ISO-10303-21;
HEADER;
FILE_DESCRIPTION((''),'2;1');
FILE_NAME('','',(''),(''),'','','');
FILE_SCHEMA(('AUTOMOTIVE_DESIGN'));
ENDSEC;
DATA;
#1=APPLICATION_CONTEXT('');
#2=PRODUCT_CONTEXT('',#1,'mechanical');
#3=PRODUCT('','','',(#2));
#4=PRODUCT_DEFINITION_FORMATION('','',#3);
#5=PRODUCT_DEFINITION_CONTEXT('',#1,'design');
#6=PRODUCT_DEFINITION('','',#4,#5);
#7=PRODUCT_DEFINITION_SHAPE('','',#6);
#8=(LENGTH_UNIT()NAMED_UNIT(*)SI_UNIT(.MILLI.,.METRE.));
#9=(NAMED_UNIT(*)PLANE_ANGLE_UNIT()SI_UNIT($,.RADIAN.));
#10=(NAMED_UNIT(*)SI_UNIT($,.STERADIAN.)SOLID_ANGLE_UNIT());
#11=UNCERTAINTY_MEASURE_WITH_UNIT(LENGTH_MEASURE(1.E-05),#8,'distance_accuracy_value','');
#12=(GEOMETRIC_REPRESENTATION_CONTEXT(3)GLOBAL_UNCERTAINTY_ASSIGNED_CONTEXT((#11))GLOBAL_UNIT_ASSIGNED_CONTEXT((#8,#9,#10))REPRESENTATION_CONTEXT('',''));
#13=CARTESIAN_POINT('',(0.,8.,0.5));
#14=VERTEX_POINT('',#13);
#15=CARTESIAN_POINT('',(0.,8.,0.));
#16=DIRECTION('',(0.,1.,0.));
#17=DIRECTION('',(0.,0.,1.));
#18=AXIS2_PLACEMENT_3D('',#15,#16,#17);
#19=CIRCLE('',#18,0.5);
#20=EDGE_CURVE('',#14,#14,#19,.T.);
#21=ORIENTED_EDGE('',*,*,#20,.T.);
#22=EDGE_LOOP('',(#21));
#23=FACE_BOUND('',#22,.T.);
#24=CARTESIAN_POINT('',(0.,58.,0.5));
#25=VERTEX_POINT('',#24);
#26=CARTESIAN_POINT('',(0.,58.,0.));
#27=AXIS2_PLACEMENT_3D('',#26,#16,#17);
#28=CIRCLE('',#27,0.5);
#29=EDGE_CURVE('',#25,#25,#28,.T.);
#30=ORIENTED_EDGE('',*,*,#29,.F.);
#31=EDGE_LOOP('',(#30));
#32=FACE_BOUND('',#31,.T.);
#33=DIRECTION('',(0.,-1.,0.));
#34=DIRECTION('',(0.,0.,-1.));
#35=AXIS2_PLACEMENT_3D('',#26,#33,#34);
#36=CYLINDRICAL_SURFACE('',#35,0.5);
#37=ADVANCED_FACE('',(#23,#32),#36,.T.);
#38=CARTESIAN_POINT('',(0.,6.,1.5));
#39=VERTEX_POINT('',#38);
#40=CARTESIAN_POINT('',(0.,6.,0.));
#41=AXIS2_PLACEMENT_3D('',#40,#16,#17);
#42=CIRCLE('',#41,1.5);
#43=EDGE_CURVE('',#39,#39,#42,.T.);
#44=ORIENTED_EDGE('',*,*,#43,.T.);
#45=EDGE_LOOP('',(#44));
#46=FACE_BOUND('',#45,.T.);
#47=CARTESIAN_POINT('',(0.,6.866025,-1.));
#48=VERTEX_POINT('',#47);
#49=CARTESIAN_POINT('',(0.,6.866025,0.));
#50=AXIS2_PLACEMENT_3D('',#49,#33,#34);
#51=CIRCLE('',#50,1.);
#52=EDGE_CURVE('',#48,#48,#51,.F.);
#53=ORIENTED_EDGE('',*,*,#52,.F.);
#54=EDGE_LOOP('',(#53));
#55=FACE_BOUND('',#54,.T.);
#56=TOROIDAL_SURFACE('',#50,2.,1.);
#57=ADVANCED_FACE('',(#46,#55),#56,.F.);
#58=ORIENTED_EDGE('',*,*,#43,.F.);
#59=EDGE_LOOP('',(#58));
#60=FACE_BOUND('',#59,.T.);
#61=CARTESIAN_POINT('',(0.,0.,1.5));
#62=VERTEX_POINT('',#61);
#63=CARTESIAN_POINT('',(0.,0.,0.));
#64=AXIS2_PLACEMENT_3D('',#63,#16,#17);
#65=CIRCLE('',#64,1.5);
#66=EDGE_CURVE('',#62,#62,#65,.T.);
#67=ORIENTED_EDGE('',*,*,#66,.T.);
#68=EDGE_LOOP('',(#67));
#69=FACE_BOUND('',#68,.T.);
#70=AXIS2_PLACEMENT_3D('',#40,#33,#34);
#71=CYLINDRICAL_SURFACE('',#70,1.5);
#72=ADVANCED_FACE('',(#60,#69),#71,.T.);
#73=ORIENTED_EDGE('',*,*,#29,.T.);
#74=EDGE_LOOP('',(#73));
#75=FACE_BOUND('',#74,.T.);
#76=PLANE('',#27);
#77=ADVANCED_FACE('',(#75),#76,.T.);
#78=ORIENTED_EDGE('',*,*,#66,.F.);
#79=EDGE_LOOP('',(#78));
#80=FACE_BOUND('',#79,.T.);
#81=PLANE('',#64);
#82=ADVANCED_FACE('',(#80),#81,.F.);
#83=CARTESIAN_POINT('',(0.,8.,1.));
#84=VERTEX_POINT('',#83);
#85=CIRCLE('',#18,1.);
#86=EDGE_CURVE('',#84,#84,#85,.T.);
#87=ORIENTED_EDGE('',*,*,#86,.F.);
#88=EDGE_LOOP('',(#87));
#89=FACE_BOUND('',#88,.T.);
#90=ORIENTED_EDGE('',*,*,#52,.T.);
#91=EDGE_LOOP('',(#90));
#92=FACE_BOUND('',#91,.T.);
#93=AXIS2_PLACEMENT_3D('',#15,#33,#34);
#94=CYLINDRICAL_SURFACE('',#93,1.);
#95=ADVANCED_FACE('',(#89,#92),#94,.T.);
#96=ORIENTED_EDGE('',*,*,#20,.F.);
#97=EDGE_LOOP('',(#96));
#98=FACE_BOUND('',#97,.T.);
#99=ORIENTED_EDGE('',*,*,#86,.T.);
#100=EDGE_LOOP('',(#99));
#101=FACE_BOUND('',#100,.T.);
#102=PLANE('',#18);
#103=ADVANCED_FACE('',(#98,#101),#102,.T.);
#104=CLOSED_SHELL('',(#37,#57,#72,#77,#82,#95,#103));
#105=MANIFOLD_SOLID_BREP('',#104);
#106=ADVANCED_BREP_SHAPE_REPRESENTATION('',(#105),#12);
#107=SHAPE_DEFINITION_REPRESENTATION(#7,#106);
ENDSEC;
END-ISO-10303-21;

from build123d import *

# Parameters (mm, degrees)
SKETCH1_R           = 1.5
BOSS_EXTRUDE1_DEPTH = 6
SKETCH2_R           = 1
BOSS_EXTRUDE2_DEPTH = 2
FILLET1_R           = 1
SKETCH3_R           = 0.5
BOSS_EXTRUDE3_DEPTH = 50


with BuildPart() as part:
    # Sketch1 → Boss-Extrude1 (new body)
    with BuildSketch(Plane(origin=(0, 0, 0), x_dir=(1, 0, 0), z_dir=(0, 1, 0))):
        with Locations(Location((0, 0, 0), (0, 0, 270))):
            Circle(SKETCH1_R)
    extrude(amount=BOSS_EXTRUDE1_DEPTH)

    # Sketch2 → Boss-Extrude2 (add)
    with BuildSketch(Plane(origin=(0, 6, 0), x_dir=(1, 0, 0), z_dir=(0, 1, 0))):
        with Locations(Location((0, 0, 0), (0, 0, 270))):
            Circle(SKETCH2_R)
    extrude(amount=BOSS_EXTRUDE2_DEPTH)

    # Fillet1
    # the kernel refuses this fillet: 1 mm, written as the material it adds along each edge
    with BuildSketch(Plane(origin=(0, 6, 0), x_dir=(0, 0, 1), z_dir=(-1, 0, 0))) as fillet1_piece_1:
        with BuildLine():
            CenterArc((2, 0.866025404), FILLET1_R, 180, 60)
            Line((1, 0.866025404), (0.98, 0.866025404))
            Line((0.98, 0.866025404), (0.98, 0))
            Line((0.98, 0), (1, -0.02))
            ThreePointArc((1, -0.02), (1.25, -0.02), (1.49, -0.017320508))
            Line((1.49, -0.017320508), (1.5, 0))
        make_face()
    revolve(axis=Axis((0, 6, 0), (0, 1, 0)))

    # Sketch3 → Boss-Extrude3 (add)
    with BuildSketch(Plane(origin=(0, 8, 0), x_dir=(1, 0, 0), z_dir=(0, 1, 0))):
        with Locations(Location((0, 0, 0), (0, 0, 270))):
            Circle(SKETCH3_R)
    extrude(amount=BOSS_EXTRUDE3_DEPTH)


solid = part.part
